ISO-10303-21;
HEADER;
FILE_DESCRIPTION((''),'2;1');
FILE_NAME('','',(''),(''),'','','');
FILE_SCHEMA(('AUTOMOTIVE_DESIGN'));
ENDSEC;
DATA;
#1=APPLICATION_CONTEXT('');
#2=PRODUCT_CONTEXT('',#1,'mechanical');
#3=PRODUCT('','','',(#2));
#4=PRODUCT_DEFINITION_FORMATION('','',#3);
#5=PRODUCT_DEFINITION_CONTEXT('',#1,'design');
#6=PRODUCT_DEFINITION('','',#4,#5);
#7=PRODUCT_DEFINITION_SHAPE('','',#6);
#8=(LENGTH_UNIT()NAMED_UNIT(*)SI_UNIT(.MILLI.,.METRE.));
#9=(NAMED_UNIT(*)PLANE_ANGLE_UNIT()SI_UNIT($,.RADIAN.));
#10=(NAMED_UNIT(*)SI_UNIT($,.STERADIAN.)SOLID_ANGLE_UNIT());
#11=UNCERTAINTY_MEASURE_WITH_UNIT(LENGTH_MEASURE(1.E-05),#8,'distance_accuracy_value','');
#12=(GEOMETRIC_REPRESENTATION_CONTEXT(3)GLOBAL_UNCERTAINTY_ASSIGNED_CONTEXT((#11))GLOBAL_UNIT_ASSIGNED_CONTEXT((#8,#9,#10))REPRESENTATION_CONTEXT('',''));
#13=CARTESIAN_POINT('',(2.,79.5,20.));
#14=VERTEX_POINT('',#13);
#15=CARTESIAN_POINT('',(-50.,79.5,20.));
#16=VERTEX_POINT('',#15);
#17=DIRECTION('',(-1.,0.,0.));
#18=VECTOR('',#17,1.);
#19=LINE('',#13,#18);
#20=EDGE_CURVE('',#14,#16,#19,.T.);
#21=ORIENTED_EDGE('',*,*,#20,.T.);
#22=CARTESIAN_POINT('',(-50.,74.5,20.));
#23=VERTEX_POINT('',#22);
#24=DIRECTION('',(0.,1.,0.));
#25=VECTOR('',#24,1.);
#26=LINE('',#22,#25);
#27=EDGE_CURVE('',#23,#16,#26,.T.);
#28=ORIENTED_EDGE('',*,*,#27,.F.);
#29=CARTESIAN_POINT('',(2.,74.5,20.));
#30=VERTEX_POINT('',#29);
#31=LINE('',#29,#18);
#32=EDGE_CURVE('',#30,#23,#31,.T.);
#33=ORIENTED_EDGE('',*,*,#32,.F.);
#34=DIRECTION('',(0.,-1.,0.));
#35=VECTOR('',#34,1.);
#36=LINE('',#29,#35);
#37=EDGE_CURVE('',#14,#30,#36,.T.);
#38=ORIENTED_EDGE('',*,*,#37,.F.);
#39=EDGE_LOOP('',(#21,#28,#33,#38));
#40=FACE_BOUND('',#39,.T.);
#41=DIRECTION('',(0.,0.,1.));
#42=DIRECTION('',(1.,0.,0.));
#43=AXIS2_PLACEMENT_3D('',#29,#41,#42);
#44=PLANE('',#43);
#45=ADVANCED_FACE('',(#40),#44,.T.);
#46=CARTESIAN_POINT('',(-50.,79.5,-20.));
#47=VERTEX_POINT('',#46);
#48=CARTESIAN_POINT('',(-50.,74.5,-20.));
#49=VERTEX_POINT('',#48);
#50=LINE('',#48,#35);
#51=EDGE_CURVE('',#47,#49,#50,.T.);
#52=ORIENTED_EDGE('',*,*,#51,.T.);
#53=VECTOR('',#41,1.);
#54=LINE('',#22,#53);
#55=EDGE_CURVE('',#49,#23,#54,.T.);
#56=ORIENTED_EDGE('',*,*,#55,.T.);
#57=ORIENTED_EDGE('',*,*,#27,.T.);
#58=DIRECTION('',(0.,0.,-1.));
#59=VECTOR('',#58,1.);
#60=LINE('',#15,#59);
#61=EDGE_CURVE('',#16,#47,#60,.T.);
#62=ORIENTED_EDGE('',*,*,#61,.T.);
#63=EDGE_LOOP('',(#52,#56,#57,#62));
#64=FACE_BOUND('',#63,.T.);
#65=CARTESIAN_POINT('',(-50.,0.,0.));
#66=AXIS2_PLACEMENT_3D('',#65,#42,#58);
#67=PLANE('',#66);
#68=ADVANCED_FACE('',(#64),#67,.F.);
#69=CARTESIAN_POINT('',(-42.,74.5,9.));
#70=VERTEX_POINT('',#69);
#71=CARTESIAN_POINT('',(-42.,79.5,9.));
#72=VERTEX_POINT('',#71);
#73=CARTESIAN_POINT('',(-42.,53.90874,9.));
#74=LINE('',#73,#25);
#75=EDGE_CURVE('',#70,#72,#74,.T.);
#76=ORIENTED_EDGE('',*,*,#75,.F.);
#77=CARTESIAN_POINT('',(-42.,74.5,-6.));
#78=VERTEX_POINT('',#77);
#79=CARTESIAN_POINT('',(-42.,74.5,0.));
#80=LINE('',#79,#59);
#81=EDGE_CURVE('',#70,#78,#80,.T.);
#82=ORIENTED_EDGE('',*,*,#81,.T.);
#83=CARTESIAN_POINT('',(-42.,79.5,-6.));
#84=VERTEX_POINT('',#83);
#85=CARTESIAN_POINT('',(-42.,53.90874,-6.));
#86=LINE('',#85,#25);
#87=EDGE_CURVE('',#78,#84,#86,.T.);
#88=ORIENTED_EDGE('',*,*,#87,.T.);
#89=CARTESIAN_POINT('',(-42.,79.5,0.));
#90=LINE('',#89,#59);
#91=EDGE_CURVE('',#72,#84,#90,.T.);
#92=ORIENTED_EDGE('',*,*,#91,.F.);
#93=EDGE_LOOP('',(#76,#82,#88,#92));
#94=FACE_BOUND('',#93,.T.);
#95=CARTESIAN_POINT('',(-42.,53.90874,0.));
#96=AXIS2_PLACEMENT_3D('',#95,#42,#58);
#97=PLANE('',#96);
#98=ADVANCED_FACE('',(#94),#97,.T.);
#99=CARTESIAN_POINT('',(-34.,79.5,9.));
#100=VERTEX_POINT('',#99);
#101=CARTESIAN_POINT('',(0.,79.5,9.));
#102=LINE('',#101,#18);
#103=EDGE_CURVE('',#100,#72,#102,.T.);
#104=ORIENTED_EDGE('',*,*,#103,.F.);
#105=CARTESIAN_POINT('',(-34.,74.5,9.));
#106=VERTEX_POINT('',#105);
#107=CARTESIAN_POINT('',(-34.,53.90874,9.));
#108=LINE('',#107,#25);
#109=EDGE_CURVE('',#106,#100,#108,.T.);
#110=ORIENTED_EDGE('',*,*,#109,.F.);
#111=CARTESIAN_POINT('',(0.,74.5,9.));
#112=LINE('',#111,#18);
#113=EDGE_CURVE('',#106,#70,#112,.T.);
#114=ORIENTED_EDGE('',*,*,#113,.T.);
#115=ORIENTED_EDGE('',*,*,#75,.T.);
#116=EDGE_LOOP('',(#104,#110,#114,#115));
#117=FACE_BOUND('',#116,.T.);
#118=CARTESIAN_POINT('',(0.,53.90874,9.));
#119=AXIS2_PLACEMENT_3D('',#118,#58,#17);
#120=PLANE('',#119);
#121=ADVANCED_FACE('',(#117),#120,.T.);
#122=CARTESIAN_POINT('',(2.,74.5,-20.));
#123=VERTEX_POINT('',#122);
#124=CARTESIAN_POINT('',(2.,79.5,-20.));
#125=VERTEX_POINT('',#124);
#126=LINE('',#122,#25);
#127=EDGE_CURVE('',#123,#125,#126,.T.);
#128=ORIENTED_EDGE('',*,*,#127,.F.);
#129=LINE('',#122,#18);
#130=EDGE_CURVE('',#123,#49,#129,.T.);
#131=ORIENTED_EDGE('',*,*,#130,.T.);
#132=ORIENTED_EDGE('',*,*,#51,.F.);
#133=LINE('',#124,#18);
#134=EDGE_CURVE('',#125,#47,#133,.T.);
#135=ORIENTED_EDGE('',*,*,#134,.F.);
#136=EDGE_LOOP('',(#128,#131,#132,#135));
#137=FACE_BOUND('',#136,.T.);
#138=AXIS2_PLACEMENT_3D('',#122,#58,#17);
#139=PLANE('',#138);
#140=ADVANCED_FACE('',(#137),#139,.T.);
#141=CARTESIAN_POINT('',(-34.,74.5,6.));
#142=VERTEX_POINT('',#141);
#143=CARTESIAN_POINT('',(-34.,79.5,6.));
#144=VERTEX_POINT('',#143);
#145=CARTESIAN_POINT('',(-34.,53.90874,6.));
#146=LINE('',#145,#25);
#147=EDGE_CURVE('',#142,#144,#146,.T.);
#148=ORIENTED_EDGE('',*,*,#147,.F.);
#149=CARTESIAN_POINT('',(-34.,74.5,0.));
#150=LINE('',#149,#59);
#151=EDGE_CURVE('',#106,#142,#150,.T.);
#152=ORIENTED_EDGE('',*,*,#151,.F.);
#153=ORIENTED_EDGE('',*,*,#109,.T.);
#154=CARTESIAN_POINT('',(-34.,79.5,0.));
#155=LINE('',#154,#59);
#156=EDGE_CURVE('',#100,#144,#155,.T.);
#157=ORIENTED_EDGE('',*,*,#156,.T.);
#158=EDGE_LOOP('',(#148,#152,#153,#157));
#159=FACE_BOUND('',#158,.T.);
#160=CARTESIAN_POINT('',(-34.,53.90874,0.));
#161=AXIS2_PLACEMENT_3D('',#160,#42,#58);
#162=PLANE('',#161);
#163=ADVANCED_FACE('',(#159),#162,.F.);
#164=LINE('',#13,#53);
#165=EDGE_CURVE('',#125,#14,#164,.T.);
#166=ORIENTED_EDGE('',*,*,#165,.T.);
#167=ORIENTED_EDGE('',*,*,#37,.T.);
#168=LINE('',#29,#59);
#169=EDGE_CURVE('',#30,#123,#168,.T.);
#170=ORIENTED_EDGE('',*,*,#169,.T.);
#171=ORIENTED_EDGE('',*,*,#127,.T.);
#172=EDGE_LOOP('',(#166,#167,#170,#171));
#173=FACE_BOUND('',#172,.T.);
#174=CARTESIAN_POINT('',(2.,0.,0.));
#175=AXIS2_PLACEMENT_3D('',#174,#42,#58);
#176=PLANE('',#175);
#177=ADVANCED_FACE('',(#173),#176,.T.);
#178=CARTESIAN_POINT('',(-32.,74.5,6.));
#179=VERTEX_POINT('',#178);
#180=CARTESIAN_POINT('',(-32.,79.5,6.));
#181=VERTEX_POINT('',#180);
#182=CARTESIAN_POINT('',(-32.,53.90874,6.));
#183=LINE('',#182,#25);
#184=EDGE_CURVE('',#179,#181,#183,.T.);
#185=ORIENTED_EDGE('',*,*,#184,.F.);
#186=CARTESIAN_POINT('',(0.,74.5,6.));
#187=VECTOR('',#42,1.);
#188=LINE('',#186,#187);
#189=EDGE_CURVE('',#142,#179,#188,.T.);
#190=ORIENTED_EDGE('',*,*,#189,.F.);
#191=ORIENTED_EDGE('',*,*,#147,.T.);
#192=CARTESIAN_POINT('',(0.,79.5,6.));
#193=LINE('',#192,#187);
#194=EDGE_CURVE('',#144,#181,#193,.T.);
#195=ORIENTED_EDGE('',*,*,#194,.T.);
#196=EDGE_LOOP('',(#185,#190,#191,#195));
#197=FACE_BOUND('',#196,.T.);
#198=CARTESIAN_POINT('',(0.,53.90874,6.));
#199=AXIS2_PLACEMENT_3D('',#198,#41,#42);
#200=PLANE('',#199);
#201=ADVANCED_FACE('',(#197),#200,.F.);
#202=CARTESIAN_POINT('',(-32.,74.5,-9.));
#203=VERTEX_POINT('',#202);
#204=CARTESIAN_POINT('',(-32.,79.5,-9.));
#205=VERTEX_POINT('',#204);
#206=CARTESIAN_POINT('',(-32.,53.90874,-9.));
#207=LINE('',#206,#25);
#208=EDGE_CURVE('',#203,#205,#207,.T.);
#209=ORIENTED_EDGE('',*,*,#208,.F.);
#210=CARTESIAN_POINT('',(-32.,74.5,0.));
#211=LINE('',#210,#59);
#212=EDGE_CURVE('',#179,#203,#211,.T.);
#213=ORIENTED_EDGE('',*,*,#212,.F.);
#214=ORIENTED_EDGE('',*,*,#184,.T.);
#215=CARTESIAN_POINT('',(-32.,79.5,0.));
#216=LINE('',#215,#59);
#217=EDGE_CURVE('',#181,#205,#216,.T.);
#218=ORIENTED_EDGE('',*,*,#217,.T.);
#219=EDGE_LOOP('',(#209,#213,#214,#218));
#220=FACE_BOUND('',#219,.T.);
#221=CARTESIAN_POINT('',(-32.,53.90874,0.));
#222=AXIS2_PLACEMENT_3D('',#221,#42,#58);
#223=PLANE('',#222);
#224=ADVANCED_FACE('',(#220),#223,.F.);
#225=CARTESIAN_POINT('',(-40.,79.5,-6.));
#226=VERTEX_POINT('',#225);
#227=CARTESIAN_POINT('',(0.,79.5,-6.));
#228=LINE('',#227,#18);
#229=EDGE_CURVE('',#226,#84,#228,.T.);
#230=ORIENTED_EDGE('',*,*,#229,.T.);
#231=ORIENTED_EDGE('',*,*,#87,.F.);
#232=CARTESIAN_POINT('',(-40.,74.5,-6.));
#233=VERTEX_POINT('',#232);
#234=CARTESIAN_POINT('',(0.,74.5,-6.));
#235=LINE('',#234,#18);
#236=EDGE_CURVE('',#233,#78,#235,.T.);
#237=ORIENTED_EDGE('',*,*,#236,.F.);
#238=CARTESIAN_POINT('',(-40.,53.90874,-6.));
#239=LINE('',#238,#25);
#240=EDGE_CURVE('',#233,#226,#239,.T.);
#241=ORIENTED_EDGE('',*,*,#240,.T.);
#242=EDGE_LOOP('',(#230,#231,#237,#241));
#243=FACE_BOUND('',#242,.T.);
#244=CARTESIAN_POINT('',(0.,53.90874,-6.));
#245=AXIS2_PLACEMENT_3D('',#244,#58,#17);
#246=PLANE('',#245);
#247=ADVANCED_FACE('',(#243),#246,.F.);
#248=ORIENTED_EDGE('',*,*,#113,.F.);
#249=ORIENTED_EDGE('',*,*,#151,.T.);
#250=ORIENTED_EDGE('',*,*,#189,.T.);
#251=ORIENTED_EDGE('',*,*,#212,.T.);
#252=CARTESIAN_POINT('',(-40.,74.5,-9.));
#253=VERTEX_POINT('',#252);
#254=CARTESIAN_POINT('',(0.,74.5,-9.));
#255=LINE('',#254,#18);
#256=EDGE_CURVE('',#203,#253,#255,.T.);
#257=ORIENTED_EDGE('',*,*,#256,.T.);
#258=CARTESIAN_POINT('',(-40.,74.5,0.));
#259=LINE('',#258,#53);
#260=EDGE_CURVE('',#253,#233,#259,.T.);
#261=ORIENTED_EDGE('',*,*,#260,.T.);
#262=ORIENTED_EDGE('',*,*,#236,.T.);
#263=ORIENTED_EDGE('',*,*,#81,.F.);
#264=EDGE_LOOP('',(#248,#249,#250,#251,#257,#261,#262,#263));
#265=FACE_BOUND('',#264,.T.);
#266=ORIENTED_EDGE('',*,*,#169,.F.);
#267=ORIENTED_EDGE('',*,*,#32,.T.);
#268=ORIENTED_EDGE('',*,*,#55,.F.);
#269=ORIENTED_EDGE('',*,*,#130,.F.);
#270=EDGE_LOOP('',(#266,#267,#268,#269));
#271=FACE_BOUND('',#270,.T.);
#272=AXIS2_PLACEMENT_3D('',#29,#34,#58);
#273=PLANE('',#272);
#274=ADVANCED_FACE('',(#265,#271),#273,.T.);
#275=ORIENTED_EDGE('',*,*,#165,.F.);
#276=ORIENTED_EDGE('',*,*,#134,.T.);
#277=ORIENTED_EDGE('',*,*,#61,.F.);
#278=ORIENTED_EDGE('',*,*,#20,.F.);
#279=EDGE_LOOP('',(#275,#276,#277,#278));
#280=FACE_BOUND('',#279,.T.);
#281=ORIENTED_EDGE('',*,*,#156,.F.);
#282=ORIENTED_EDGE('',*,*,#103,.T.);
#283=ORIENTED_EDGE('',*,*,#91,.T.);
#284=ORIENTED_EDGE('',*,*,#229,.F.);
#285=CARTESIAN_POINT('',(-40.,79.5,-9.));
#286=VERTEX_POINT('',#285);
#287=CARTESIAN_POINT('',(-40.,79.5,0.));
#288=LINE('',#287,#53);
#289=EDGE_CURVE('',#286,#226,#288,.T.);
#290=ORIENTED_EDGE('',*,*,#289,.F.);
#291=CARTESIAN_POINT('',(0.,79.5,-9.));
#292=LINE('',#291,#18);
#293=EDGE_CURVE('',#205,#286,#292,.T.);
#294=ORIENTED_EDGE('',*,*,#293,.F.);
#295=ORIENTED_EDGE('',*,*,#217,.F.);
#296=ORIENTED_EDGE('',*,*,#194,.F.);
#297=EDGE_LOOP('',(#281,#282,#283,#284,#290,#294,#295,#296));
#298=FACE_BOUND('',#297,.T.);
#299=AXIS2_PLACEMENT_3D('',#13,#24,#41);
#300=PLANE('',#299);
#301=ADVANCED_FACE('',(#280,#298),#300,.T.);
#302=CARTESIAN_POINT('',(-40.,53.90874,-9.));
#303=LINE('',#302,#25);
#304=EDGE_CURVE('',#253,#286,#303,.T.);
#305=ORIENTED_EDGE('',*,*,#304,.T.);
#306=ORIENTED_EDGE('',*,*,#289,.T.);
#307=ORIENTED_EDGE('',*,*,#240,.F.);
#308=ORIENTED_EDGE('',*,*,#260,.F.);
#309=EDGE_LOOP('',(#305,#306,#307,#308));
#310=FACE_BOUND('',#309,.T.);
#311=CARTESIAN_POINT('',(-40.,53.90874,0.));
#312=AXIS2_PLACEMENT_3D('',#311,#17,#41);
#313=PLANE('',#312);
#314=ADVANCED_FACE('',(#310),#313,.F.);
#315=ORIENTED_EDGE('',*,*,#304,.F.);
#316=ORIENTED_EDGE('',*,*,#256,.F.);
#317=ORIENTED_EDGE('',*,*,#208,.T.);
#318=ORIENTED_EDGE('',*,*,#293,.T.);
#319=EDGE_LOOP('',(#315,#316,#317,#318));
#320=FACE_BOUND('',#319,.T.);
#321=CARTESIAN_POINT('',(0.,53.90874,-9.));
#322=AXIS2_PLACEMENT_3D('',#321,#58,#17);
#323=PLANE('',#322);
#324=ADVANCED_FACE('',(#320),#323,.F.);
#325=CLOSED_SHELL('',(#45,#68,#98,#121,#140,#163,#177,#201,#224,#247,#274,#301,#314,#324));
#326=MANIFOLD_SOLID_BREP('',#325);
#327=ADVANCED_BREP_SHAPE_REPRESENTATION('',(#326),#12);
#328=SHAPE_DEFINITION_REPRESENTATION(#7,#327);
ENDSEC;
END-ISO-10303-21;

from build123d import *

# Parameters (mm, degrees)
STOCK_895_FRAME_1_START     = 74.5
STOCK_895_FRAME_1_OUTLINE_W = 50
STOCK_895_FRAME_1_OUTLINE_H = 40
STOCK_895_FRAME_1_DEPTH     = 5
SKETCH2_W                   = 5
SKETCH2_H                   = 40
BOSS_EXTRUDE1_DEPTH         = 2


# Read off the part's stored shape, not the designer's step: Stock-895_Frame-1
with BuildPart() as part:
    # Stock-895_Frame-1 outline → Stock-895_Frame-1 (new body)
    with BuildSketch(Plane(origin=(0, 0, 0), x_dir=(1, 0, 0), z_dir=(0, 1, 0)).offset(STOCK_895_FRAME_1_START)):
        with Locations((-25, 0)):
            Rectangle(STOCK_895_FRAME_1_OUTLINE_W, STOCK_895_FRAME_1_OUTLINE_H)
        Polygon((-34, -6), (-34, -9), (-42, -9), (-42, 6), (-40, 6), (-40, 9), (-32, 9), (-32, -6), align=None, mode=Mode.SUBTRACT)
    extrude(amount=STOCK_895_FRAME_1_DEPTH)

    # Sketch2 → Boss-Extrude1 (add)
    with BuildSketch(Plane.YZ):
        with Locations((77, 0)):
            Rectangle(SKETCH2_W, SKETCH2_H)
    extrude(amount=BOSS_EXTRUDE1_DEPTH)


solid = part.part
